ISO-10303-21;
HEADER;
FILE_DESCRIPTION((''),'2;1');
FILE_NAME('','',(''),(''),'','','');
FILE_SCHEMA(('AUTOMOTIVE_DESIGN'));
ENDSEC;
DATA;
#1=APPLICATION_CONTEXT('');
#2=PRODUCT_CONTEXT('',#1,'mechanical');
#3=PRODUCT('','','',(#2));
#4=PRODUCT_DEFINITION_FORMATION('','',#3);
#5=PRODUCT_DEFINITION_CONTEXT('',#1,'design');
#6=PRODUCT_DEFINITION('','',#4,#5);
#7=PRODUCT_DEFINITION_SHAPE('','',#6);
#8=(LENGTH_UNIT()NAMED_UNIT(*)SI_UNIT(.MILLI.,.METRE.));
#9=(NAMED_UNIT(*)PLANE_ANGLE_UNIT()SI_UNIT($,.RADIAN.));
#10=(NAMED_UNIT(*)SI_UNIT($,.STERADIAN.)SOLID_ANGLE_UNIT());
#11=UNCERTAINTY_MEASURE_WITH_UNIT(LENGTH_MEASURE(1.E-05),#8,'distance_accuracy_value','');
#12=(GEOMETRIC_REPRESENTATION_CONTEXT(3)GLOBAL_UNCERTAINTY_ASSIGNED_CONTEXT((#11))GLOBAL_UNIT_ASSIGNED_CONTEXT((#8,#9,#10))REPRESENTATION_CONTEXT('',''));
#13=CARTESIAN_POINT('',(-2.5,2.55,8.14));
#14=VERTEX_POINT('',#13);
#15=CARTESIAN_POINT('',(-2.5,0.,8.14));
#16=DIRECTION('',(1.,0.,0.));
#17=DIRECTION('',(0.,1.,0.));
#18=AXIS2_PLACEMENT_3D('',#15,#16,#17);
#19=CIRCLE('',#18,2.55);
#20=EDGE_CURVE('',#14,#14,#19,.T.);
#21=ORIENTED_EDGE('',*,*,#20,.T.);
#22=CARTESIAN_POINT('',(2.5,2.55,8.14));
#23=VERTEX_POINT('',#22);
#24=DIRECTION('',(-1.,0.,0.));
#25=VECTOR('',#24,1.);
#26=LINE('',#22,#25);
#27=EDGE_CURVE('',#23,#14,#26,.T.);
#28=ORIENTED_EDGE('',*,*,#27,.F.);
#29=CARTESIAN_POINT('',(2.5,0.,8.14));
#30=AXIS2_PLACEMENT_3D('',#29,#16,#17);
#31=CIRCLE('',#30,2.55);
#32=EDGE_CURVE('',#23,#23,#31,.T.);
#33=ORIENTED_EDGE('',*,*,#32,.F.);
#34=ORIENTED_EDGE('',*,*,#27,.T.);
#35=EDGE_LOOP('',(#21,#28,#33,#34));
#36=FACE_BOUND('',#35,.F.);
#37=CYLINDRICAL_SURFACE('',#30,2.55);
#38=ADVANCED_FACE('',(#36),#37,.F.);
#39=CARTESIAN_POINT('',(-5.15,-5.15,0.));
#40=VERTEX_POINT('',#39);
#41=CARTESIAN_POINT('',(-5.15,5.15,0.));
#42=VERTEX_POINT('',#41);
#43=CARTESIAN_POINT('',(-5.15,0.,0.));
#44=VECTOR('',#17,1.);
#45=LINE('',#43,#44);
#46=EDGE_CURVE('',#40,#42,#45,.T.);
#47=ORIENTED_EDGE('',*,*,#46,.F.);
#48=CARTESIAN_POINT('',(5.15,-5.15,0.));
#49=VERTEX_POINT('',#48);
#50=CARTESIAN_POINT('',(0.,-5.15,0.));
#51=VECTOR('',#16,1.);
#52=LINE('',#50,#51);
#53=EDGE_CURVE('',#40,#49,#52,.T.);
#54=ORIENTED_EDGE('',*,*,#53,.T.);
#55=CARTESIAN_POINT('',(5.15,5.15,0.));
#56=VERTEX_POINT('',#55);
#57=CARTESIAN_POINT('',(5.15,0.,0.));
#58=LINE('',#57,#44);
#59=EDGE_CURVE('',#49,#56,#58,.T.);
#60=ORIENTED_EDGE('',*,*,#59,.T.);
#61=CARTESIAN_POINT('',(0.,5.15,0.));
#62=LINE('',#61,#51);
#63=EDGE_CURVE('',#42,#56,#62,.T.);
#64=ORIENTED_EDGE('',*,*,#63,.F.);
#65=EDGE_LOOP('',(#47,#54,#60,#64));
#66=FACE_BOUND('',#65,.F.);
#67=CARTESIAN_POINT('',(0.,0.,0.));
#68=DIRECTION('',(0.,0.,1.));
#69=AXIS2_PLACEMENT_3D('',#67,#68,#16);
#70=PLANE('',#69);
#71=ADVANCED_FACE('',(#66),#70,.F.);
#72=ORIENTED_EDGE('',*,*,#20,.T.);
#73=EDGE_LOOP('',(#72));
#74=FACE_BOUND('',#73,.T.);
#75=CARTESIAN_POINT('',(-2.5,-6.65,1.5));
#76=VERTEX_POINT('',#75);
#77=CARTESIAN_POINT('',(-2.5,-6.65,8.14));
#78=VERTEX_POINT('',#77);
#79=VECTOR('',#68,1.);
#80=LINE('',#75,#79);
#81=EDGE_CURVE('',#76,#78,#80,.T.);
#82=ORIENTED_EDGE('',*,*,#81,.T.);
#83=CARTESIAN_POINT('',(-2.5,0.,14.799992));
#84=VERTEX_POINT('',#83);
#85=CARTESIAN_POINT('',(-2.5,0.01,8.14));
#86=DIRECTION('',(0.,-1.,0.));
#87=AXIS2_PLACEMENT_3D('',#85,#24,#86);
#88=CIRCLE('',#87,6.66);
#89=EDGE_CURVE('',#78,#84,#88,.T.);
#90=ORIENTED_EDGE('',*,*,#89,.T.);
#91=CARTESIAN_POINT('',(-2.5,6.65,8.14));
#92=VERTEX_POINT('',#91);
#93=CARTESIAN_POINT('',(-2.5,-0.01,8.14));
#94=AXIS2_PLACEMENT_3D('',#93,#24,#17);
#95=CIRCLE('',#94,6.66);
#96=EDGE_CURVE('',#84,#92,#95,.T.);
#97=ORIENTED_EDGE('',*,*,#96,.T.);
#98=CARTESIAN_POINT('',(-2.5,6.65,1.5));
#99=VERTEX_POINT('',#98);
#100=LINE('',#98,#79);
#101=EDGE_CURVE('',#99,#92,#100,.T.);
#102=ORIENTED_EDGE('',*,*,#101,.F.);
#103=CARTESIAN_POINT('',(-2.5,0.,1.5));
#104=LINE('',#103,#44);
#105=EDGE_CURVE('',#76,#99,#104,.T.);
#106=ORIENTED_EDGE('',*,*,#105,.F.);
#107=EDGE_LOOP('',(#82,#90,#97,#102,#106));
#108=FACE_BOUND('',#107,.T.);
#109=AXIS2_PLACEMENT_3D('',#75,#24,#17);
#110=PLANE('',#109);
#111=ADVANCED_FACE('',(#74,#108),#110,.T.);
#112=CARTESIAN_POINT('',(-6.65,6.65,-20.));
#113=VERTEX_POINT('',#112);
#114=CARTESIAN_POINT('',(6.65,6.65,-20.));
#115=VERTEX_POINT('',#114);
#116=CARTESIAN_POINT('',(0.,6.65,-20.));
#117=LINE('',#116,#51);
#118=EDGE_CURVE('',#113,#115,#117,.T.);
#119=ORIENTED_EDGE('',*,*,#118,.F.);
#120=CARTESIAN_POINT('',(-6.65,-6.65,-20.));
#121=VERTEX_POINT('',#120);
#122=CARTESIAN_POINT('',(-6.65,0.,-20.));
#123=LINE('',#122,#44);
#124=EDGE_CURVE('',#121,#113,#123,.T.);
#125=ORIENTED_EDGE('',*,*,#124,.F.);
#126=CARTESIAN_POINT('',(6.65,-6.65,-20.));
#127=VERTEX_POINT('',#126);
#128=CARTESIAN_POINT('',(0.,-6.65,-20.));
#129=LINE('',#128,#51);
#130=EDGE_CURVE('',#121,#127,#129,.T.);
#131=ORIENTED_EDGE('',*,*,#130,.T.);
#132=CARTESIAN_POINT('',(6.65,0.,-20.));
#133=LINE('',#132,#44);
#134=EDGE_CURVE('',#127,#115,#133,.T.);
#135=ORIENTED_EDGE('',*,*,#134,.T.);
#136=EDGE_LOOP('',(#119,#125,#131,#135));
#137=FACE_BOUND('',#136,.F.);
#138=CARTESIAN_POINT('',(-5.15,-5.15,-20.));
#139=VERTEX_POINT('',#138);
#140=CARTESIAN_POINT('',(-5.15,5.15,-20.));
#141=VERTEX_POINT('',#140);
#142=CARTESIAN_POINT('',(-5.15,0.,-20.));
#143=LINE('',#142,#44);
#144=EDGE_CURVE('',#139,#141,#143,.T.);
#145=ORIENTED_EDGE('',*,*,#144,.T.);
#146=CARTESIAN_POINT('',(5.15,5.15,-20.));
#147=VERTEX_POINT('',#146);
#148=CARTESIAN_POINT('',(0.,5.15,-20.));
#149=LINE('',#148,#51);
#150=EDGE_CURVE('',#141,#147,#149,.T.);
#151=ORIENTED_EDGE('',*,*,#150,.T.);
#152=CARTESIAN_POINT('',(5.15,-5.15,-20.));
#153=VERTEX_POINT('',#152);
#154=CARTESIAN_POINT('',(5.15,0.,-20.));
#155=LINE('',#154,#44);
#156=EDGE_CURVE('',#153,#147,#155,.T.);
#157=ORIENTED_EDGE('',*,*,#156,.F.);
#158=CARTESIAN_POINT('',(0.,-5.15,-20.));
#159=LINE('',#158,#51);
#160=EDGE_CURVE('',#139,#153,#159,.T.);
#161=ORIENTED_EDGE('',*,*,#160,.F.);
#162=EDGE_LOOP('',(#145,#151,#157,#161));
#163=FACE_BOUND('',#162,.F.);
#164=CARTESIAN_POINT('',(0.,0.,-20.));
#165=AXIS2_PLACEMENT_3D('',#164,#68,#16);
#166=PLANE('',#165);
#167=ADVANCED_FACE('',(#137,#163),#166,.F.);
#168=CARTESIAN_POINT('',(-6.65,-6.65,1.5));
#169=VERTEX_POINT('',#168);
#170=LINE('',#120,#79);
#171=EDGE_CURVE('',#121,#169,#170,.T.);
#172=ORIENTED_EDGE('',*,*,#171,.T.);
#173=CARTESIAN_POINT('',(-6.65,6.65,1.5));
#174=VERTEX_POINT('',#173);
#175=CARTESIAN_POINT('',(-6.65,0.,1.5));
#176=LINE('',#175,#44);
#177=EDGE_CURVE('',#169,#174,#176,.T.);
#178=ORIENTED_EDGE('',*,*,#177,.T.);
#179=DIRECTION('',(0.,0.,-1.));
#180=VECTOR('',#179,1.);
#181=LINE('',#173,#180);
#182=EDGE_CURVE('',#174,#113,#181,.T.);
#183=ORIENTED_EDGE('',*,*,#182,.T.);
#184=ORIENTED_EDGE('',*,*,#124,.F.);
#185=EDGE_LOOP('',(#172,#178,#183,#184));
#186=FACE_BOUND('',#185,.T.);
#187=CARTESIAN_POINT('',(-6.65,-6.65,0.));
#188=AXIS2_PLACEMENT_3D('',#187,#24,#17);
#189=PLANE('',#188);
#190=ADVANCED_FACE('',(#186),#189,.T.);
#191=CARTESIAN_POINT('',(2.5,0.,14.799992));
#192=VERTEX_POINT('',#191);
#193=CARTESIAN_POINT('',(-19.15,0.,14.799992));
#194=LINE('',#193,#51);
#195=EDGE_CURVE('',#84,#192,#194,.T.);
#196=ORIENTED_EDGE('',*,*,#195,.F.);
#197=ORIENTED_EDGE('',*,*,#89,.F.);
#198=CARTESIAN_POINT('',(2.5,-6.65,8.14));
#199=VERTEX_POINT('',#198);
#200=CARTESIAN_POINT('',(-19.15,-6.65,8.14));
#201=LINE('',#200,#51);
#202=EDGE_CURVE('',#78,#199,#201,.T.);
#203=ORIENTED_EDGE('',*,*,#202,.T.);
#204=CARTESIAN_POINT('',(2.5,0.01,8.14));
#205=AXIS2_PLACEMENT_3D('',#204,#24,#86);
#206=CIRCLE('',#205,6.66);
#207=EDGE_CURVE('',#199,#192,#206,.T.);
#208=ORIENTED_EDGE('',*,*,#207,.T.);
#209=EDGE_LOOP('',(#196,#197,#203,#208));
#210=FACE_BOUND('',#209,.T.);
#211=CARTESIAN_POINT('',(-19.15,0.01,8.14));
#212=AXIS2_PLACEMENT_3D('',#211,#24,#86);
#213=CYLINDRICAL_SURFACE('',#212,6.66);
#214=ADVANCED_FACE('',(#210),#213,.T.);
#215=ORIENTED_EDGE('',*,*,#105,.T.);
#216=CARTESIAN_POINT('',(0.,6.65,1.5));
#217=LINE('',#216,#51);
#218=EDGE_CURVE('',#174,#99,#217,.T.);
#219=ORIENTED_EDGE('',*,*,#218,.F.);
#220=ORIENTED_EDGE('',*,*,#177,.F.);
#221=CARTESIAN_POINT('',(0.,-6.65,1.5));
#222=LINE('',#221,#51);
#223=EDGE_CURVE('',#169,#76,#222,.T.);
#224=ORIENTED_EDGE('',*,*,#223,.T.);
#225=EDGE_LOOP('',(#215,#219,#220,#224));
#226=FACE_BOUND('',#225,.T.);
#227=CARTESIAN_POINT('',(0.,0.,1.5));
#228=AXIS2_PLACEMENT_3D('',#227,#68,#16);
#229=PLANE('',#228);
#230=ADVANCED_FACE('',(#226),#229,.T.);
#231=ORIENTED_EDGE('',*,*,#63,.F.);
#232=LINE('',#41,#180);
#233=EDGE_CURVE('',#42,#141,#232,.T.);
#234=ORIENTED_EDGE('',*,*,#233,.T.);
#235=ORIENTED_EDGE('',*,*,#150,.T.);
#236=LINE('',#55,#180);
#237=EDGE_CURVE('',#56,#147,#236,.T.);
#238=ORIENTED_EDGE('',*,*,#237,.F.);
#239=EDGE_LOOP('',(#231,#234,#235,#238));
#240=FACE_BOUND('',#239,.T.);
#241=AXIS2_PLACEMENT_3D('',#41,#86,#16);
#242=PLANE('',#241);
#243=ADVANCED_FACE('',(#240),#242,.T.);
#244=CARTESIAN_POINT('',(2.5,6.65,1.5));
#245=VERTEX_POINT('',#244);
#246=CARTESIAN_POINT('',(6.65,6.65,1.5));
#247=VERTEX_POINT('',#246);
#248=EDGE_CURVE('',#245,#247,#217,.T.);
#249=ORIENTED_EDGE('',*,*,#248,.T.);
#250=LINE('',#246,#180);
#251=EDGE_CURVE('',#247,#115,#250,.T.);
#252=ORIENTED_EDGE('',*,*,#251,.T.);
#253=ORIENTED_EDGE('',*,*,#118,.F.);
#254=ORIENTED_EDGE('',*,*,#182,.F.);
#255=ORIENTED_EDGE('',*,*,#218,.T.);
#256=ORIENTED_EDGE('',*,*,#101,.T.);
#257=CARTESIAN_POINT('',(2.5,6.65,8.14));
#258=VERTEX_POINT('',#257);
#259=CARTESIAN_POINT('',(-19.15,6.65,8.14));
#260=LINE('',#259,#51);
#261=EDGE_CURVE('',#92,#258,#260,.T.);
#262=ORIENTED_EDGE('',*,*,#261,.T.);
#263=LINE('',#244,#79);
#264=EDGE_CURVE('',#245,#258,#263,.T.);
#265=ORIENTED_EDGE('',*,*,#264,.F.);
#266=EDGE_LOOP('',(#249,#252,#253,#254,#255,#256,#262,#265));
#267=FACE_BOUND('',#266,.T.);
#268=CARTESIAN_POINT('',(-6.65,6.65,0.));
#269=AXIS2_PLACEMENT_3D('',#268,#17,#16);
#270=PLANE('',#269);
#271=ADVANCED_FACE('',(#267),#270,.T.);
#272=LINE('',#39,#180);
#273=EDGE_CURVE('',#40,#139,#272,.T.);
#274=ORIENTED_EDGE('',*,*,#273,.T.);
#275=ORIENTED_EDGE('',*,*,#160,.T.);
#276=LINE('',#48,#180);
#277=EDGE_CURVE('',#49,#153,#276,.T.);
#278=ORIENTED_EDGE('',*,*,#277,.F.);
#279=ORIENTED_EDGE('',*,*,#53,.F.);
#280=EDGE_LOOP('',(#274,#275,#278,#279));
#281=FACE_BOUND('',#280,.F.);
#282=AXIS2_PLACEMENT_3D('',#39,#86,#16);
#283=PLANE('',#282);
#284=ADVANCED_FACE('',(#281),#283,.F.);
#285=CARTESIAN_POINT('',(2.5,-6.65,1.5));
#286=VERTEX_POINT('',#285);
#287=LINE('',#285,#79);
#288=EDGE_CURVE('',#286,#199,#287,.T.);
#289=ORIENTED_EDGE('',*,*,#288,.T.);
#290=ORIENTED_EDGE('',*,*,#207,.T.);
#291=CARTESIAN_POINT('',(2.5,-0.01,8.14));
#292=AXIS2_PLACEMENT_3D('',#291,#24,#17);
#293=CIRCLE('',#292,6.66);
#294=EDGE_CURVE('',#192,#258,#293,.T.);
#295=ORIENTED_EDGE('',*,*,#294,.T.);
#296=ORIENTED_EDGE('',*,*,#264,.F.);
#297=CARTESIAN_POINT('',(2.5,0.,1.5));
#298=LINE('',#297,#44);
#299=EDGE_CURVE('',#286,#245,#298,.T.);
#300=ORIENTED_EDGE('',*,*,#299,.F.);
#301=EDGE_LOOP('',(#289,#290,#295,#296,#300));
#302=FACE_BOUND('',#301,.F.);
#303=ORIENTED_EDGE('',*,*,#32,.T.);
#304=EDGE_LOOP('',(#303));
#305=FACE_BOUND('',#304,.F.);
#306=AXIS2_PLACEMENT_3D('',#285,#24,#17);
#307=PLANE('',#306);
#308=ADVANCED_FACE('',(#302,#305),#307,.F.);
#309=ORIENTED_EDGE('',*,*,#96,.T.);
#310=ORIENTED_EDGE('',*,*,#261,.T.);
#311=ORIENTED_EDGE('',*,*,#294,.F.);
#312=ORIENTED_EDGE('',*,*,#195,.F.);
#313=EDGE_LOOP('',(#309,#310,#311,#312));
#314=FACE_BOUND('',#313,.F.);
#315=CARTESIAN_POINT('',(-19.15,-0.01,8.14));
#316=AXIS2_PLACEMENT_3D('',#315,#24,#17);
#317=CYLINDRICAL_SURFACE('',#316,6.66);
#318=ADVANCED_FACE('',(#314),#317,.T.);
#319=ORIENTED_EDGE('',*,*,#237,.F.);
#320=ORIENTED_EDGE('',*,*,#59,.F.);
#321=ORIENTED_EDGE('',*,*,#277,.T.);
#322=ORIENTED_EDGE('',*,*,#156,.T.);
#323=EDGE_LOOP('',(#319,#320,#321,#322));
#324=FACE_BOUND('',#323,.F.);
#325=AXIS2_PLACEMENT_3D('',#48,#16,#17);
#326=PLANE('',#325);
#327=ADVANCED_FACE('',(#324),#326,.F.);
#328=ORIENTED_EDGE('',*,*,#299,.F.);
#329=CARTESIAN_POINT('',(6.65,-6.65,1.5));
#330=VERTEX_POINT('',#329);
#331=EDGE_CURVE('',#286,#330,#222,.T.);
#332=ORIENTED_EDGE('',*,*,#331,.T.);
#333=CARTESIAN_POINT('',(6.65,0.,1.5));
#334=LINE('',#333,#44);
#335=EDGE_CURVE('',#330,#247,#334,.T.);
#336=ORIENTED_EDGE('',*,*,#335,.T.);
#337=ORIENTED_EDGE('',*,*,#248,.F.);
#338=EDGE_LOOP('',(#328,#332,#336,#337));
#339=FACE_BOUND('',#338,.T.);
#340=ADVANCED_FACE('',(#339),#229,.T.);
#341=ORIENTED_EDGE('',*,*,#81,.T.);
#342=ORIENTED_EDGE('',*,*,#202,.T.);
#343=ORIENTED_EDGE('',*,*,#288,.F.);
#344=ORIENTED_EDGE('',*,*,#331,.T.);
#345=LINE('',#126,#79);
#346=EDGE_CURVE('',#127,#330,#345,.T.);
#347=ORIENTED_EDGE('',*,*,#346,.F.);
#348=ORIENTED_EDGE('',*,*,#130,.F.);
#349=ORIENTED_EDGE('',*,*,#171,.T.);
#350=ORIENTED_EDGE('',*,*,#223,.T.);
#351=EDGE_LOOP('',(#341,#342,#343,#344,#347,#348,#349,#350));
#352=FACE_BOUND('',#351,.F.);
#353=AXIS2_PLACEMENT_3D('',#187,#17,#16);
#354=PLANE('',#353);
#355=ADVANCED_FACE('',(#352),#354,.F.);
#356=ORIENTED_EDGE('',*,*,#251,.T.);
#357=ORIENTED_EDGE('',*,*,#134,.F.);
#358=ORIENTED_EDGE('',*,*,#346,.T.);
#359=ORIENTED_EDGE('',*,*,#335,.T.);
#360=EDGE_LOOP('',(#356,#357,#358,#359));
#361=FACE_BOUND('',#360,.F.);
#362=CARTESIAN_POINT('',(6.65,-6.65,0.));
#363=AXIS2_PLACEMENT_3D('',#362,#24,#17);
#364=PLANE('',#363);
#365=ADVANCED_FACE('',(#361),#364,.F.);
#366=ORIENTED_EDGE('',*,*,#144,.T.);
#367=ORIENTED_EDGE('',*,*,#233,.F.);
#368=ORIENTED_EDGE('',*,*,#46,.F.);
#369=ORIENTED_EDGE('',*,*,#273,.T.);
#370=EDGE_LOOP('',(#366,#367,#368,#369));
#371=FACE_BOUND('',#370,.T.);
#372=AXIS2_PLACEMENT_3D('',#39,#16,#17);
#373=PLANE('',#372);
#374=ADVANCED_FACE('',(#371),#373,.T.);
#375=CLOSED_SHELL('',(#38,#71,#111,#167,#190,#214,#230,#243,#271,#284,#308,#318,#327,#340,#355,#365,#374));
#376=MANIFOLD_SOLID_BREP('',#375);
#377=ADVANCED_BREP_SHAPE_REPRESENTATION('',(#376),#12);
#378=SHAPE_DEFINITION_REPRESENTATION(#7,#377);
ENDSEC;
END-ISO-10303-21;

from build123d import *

# Parameters (mm, degrees)
F0_W          = 13.3
F0_H          = 13.3
F0_W_2        = 10.3
F0_H_2        = 10.3
F1_DEPTH      = 20
F2_DEPTH      = 1.5
F3_W          = 5
F3_H          = 13.3
F4_DEPTH      = 13.3
F5_T1_DEPTH   = 38.3
F6_R          = 2.55
F7_DEPTH      = 25
F7_DEPTH_BACK = 25


# Not quite as in the source:
# - a fillet or chamfer that OpenCascade refuses, or shapes differently, is made with other operations: its cross-section is extruded or revolved along the edge and cut away or added


with BuildPart() as f1:
    # F0 (on Top) → F1 (new body)
    with BuildSketch(Plane.XY):
        Rectangle(F0_W, F0_H)
        Rectangle(F0_W_2, F0_H_2, mode=Mode.SUBTRACT)
    extrude(amount=-F1_DEPTH)

    # F0 (on Top) → F2 (join)
    with BuildSketch(Plane.XY):
        Rectangle(F0_W, F0_H)
        Rectangle(F0_W_2, F0_H_2, mode=Mode.SUBTRACT)
        Rectangle(F0_W_2, F0_H_2)
    extrude(amount=F2_DEPTH)

    # F3 (on face) → F4 (join)
    with BuildSketch(Plane.XY.offset(1.5)):
        Rectangle(F3_W, F3_H)
    extrude(amount=F4_DEPTH)

    # F5: fillet of radius 6.66 on 2 edges, made by hand

    # F5_s2 → F5_t1 (cut)
    with BuildSketch(Plane.YZ.offset(-19.15)):
        with BuildLine():
            ThreePointArc((-6.65, 8.14), (-4.6993311627, 12.8493311627), (0.01, 14.8))
            Line((0.01, 14.8), (-6.65, 14.8))
            Line((-6.65, 14.8), (-6.65, 8.14))
        make_face()
        with BuildLine():
            ThreePointArc((6.65, 8.14), (4.6993311627, 12.8493311627), (-0.01, 14.8))
            Line((-0.01, 14.8), (6.65, 14.8))
            Line((6.65, 14.8), (6.65, 8.14))
        make_face()
    extrude(amount=F5_T1_DEPTH, mode=Mode.SUBTRACT)

    # F6 (on face) → F7 (cut, two sides)
    with BuildSketch(Plane.YZ.offset(2.5)) as f7_sk:
        with Locations((0, 8.14)):
            Circle(F6_R)
    extrude(amount=-F7_DEPTH, mode=Mode.SUBTRACT)
    extrude(f7_sk.sketch, amount=F7_DEPTH_BACK, mode=Mode.SUBTRACT)


solid = f1.part
